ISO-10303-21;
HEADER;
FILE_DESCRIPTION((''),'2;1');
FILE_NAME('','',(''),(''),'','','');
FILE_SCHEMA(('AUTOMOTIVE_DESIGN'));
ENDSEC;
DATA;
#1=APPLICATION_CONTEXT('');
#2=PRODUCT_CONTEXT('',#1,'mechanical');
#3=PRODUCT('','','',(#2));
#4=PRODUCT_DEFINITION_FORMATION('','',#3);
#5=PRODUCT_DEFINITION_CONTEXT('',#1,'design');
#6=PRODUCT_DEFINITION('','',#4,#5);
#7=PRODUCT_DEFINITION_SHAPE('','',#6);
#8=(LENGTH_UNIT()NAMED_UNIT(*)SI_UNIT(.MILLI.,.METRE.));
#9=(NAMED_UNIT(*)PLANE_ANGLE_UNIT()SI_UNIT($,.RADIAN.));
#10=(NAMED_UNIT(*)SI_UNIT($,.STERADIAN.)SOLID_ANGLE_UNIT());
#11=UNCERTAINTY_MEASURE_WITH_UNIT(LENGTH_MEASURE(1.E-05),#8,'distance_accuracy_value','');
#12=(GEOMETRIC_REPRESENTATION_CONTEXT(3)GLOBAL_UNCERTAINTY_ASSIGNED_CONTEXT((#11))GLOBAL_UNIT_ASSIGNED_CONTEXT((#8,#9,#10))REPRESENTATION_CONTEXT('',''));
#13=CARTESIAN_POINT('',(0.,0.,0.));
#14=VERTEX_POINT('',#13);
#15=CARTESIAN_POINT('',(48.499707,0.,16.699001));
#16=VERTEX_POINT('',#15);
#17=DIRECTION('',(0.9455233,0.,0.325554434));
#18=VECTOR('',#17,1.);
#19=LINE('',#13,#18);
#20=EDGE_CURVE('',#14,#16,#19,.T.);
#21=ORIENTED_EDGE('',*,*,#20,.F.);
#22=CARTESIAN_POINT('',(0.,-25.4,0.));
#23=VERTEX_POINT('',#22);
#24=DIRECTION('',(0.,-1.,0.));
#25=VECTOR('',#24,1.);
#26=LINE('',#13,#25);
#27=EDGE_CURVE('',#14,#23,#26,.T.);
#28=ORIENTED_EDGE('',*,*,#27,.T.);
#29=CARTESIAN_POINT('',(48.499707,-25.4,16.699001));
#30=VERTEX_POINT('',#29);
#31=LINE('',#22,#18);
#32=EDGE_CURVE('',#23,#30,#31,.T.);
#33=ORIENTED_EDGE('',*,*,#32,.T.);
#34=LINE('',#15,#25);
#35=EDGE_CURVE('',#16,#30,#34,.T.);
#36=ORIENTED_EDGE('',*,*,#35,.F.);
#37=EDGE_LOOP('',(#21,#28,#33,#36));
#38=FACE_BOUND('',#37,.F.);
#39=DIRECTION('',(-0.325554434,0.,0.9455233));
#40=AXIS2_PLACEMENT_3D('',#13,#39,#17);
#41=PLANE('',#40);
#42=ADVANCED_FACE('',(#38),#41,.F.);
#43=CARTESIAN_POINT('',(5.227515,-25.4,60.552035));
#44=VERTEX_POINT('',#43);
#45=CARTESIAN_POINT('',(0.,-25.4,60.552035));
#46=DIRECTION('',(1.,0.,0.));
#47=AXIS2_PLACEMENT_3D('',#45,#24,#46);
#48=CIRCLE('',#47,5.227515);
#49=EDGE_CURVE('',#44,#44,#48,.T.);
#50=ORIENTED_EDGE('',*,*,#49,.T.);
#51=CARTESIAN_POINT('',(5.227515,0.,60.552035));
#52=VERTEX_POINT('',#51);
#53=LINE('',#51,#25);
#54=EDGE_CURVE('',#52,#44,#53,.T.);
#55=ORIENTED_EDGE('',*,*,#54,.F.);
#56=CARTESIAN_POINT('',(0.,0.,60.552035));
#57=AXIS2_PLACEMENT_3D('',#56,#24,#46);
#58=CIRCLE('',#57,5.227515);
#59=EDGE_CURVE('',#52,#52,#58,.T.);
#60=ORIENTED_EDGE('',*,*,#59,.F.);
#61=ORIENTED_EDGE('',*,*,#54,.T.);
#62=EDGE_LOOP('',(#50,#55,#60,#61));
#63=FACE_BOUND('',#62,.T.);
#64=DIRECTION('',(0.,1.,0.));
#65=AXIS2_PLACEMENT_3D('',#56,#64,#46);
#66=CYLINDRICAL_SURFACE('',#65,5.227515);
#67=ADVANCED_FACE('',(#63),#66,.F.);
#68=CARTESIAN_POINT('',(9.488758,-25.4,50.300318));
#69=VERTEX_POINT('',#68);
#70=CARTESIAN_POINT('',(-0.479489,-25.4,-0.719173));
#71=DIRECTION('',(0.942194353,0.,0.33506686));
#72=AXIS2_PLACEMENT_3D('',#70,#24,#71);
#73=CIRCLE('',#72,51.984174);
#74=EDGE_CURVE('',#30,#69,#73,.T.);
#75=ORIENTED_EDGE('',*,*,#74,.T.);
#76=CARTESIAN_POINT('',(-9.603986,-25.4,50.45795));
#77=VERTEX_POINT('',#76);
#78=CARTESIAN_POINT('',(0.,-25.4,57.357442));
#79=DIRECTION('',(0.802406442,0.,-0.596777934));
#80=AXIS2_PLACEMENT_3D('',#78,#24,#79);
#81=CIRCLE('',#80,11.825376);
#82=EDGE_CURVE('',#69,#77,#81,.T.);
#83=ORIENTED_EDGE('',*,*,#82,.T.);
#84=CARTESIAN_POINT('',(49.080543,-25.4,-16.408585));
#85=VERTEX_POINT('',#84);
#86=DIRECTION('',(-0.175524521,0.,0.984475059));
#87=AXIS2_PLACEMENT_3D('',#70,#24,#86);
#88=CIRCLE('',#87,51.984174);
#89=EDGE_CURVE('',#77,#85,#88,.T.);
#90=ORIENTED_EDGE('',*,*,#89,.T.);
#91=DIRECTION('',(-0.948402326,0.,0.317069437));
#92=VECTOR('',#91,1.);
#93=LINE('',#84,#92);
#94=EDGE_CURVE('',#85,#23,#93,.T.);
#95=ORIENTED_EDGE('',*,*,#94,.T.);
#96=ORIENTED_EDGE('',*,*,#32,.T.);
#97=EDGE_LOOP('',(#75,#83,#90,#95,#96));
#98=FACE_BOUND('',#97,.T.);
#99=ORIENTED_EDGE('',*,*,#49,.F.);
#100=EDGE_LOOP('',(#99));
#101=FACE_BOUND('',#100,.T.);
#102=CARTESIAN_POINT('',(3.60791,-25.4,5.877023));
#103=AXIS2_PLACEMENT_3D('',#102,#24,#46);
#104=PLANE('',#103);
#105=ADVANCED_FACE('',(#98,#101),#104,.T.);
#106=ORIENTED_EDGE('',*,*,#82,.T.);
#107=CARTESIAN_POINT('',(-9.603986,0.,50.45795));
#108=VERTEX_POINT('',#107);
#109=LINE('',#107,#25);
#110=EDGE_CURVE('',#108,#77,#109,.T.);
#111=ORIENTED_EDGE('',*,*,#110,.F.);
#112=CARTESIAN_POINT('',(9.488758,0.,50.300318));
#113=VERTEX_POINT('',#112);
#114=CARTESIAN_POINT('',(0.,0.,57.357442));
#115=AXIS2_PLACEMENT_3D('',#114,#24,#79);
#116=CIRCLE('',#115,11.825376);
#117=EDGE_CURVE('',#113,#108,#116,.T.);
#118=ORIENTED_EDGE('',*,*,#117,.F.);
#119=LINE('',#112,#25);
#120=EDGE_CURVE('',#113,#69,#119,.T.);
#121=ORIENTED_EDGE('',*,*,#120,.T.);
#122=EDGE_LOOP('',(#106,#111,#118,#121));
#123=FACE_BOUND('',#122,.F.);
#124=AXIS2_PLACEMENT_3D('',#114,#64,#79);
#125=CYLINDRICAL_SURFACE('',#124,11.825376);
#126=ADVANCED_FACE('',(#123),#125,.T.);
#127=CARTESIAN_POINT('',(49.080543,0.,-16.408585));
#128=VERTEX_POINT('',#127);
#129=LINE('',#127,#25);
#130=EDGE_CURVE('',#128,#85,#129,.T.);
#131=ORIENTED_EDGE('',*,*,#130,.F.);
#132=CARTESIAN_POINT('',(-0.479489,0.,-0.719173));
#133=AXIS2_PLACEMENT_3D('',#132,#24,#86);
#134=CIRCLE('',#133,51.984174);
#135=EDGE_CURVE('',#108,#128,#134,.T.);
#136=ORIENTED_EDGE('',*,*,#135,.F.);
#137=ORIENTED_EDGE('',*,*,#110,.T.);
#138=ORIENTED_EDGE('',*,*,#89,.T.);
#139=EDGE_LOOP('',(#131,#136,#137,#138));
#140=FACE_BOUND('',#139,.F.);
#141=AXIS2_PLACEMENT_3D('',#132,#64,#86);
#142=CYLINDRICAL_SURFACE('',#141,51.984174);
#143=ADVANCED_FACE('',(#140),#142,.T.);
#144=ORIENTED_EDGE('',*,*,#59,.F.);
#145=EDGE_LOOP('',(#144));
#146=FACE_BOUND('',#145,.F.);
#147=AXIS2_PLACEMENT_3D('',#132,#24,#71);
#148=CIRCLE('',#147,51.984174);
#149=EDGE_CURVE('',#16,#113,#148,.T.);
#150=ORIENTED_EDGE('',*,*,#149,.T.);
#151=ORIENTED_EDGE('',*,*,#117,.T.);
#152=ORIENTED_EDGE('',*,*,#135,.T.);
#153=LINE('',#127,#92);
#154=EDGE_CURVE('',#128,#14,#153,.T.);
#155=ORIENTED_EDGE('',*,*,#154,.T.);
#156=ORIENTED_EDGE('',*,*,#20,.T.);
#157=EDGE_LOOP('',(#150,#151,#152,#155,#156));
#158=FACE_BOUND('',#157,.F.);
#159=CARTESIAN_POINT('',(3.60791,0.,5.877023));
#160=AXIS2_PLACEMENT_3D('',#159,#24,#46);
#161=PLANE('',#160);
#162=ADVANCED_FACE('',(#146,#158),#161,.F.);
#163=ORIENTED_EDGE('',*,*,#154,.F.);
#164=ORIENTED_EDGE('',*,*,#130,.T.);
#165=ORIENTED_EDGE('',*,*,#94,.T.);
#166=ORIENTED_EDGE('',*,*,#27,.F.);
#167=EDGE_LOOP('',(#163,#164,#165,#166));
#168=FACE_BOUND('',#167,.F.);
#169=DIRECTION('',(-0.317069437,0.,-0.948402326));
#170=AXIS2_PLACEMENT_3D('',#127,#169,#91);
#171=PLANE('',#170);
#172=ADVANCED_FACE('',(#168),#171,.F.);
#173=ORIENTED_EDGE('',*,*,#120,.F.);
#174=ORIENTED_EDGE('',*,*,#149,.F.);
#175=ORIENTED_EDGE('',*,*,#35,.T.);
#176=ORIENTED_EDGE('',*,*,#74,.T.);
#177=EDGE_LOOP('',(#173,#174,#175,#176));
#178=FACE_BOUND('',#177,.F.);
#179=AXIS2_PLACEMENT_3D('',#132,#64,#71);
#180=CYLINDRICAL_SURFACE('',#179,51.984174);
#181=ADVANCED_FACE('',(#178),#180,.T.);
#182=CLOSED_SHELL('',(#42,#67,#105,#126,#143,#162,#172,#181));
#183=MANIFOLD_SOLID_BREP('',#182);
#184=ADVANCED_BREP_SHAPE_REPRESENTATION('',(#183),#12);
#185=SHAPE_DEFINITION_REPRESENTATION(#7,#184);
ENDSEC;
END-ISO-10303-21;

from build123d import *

# Parameters (mm, degrees)
F0_R     = 5.227515474
F1_DEPTH = 25.4
F2_DEPTH = 25.4


# Not quite as in the source:
# - a feature names something its author has since deleted; it is built from what else it names


with BuildPart() as f1:
    # F0 (on Front) → F1 (new body)
    with BuildSketch(Plane.XZ):
        with BuildLine():
            Line((0, 0), (48.4997071326, 16.699001193))
            ThreePointArc((48.4997071326, 16.699001193), (33.4463476719, 38.6685413288), (9.4887581342, 50.3003179933))
            ThreePointArc((9.4887581342, 50.3003179933), (0.0976286062, 69.1824149389), (-9.603985867, 50.457950314))
            ThreePointArc((-9.603985867, 50.457950314), (-39.5504687593, -35.0093012615), (49.08054322, -16.408585012))
            Line((49.08054322, -16.408585012), (0, 0))
        make_face()
        with Locations((0, 60.5520345271)):
            Circle(F0_R, mode=Mode.SUBTRACT)
    extrude(amount=F1_DEPTH)

    # F0 (on Front) → F2 (join)
    with BuildSketch(Plane.XZ):
        with BuildLine():
            Line((0, 0), (48.4997071326, 16.699001193))
            ThreePointArc((48.4997071326, 16.699001193), (33.4463476719, 38.6685413288), (9.4887581342, 50.3003179933))
            ThreePointArc((9.4887581342, 50.3003179933), (0.0976286062, 69.1824149389), (-9.603985867, 50.457950314))
            ThreePointArc((-9.603985867, 50.457950314), (-39.5504687593, -35.0093012615), (49.08054322, -16.408585012))
            Line((49.08054322, -16.408585012), (0, 0))
        make_face()
        with Locations((0, 60.5520345271)):
            Circle(F0_R, mode=Mode.SUBTRACT)
    extrude(amount=F2_DEPTH)


solid = f1.part
